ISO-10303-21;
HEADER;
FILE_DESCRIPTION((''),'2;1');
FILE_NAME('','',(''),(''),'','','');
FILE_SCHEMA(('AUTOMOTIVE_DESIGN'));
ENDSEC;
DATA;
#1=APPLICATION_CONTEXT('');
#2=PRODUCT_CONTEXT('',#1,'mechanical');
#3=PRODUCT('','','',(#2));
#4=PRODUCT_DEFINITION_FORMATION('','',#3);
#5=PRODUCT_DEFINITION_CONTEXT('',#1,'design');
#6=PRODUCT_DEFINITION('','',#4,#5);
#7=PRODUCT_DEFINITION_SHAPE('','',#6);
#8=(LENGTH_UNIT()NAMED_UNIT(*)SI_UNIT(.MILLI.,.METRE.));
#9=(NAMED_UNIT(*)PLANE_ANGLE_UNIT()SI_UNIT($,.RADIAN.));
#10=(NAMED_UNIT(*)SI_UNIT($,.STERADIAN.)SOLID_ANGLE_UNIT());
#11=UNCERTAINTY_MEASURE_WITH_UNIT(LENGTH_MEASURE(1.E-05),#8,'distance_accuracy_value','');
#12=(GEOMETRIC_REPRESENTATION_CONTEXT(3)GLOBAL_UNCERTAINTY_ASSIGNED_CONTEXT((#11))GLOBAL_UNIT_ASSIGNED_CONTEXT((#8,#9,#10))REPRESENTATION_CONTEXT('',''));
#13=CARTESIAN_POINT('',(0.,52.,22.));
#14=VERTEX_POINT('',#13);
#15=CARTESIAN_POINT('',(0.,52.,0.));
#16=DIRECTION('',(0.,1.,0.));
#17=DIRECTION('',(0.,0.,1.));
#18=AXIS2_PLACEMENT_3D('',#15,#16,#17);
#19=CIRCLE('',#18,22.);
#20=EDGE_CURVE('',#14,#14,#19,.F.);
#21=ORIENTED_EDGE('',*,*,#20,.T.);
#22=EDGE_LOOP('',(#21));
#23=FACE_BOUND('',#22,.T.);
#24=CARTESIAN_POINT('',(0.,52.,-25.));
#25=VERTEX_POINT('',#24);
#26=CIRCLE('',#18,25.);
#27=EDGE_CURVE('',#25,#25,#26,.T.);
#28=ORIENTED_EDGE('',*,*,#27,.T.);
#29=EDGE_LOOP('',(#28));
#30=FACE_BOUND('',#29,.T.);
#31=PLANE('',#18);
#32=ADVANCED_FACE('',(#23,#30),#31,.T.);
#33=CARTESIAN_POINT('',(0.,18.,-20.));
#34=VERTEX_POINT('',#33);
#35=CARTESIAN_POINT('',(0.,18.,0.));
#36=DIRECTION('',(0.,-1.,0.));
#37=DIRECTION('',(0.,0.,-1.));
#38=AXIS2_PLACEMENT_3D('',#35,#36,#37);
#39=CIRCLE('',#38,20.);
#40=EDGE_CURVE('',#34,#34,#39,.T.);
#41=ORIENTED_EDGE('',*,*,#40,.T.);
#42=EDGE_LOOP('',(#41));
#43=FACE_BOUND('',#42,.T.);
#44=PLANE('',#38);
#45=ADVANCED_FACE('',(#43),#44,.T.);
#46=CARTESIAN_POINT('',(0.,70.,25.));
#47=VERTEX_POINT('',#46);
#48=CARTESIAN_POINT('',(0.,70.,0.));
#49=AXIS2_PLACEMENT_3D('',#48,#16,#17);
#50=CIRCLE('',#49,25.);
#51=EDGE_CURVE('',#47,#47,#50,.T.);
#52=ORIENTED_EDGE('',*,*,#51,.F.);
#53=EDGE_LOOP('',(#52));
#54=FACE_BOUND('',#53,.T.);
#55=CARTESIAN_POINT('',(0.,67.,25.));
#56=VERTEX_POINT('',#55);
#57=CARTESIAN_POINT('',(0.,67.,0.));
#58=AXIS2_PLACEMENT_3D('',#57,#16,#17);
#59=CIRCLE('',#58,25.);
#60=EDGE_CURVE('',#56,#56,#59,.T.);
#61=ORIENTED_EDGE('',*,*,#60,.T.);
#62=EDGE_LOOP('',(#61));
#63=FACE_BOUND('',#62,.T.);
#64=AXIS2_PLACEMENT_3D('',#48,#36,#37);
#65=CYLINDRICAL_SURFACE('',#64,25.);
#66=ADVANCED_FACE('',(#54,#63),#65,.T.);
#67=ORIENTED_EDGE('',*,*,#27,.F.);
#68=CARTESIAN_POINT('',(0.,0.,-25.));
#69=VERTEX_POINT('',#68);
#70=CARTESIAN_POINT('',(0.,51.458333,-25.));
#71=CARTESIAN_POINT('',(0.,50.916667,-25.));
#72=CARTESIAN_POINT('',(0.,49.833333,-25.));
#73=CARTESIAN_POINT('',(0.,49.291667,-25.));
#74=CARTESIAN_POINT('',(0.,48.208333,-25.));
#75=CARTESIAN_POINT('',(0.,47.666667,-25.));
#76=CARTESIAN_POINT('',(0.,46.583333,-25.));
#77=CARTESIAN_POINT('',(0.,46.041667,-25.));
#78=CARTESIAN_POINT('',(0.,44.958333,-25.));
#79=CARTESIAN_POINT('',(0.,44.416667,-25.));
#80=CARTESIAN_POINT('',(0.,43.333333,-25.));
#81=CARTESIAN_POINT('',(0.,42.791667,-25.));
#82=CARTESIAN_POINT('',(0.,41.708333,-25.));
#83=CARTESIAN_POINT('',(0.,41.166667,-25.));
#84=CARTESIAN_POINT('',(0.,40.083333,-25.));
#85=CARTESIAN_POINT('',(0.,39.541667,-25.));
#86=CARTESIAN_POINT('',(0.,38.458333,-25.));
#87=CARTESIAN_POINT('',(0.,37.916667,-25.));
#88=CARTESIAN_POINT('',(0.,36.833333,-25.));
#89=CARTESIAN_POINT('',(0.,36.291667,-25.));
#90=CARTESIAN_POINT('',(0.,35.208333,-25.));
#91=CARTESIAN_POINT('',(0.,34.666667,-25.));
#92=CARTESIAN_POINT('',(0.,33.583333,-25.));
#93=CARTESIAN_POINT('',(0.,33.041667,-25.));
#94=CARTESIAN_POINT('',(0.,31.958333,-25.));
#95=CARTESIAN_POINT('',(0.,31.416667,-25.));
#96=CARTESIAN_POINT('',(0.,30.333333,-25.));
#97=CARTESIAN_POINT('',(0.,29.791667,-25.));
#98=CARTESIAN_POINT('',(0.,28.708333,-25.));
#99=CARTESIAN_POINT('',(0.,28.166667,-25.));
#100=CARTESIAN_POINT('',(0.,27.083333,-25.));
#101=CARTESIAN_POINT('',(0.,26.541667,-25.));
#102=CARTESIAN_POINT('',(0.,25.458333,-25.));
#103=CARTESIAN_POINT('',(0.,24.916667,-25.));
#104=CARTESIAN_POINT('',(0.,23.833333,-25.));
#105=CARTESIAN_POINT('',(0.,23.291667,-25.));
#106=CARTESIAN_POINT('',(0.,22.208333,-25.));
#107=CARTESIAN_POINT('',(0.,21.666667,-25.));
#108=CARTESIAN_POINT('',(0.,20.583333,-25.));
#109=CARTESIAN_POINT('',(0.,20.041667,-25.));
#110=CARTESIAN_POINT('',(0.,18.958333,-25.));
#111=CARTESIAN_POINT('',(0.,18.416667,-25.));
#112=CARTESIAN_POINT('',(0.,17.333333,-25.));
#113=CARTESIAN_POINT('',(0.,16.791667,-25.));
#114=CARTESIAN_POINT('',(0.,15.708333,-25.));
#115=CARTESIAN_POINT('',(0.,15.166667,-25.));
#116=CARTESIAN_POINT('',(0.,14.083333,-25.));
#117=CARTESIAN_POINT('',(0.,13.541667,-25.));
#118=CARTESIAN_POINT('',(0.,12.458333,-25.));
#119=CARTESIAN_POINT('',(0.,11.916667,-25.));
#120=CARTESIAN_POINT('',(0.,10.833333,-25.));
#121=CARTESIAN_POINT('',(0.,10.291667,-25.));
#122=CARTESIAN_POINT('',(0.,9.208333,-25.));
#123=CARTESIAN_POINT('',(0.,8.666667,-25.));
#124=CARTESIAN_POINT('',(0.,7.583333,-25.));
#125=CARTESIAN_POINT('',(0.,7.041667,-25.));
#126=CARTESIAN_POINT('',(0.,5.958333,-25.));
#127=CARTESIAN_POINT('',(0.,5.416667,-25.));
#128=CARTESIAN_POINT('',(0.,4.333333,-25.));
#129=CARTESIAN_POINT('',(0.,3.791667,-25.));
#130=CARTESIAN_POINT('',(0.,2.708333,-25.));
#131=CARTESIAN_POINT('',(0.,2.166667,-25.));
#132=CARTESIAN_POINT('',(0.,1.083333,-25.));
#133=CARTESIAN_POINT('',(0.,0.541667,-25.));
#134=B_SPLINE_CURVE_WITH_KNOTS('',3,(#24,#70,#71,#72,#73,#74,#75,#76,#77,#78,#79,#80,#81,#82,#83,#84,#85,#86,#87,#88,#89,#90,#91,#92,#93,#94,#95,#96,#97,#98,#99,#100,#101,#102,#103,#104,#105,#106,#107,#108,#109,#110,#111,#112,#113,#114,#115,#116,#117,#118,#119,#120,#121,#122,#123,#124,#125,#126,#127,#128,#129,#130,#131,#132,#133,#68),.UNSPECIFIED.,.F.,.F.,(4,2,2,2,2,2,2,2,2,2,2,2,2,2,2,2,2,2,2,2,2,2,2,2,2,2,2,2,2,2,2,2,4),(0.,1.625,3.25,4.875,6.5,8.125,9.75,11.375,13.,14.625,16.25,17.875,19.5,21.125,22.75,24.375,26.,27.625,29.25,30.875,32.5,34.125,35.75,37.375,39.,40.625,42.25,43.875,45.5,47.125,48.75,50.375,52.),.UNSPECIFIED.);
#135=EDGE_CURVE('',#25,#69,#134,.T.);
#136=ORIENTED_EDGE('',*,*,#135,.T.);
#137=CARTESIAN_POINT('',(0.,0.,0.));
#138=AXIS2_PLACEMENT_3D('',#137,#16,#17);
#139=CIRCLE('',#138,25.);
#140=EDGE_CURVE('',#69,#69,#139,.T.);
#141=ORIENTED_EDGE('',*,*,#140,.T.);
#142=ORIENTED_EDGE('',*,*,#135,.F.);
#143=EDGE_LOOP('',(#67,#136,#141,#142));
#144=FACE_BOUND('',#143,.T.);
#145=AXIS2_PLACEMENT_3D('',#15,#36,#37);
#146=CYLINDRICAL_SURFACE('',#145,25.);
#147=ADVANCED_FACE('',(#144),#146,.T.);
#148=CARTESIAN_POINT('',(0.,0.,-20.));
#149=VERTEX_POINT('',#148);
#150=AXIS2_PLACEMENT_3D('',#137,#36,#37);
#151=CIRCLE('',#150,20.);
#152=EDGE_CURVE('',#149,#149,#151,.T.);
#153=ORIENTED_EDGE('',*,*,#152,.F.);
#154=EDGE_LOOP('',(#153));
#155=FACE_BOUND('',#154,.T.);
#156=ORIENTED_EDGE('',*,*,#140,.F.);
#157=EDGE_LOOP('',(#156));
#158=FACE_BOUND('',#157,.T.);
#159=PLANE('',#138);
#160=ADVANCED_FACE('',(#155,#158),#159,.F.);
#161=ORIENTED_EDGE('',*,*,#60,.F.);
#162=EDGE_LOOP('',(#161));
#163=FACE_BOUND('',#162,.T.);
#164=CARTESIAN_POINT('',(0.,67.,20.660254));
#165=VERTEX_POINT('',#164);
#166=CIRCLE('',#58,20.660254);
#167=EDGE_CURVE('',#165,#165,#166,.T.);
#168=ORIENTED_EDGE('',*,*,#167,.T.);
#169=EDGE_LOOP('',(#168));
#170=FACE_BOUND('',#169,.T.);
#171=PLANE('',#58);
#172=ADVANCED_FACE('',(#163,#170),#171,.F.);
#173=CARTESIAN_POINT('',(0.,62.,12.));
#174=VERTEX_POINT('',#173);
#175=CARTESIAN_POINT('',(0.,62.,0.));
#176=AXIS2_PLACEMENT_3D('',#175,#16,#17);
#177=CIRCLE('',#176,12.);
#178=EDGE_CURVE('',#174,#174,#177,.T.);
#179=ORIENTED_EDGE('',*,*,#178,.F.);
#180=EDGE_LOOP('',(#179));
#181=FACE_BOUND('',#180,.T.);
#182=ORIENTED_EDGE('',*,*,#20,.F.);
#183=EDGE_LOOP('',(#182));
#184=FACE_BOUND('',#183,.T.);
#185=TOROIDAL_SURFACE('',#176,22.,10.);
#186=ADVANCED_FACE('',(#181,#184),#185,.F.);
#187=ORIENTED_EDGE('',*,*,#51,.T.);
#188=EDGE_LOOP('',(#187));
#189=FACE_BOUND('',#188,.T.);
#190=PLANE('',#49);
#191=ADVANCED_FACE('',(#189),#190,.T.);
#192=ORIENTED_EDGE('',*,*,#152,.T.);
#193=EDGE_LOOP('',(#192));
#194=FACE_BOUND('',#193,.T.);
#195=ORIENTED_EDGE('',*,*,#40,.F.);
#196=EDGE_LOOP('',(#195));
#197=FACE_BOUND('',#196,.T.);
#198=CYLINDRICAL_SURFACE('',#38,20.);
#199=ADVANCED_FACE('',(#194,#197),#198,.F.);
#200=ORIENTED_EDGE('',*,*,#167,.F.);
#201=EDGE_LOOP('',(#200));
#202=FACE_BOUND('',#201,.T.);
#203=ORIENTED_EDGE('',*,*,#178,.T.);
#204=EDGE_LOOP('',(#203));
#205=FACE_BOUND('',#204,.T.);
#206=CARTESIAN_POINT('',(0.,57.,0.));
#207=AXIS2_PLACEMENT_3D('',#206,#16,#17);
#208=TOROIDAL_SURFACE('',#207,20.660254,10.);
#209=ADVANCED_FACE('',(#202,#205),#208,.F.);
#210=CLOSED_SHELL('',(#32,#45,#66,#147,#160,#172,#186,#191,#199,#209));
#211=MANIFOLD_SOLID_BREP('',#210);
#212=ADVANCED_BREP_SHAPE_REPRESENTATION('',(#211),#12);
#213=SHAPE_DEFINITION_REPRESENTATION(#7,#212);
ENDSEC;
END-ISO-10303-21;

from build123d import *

# Parameters (mm, degrees)
SKETCH1_R           = 25
BOSS_EXTRUDE1_DEPTH = 52
SKETCH2_R           = 12
BOSS_EXTRUDE2_DEPTH = 15
SKETCH3_R           = 25
BOSS_EXTRUDE3_DEPTH = 3
FILLET1_R           = 10
FILLET2_R           = 10
SKETCH4_R           = 20
CUT_EXTRUDE1_DEPTH  = 18


with BuildPart() as part:
    # Sketch1 → Boss-Extrude1 (new body)
    with BuildSketch(Plane(origin=(0, 0, 0), x_dir=(1, 0, 0), z_dir=(0, 1, 0))):
        with Locations(Location((0, 0, 0), (0, 0, 90))):
            Circle(SKETCH1_R)
    extrude(amount=BOSS_EXTRUDE1_DEPTH)

    # Sketch2 → Boss-Extrude2 (add)
    with BuildSketch(Plane(origin=(0, 52, 0), x_dir=(1, 0, 0), z_dir=(0, 1, 0))):
        with Locations(Location((0, 0, 0), (0, 0, 270))):
            Circle(SKETCH2_R)
    extrude(amount=BOSS_EXTRUDE2_DEPTH)

    # Sketch3 → Boss-Extrude3 (add)
    with BuildSketch(Plane(origin=(0, 67, 0), x_dir=(1, 0, 0), z_dir=(0, 1, 0))):
        with Locations(Location((0, 0, 0), (0, 0, 90))):
            Circle(SKETCH3_R)
    extrude(amount=BOSS_EXTRUDE3_DEPTH)

    # Fillet1
    fillet1_edges = [part.edges().sort_by_distance(p)[0] for p in [
        (0, 52, -12),
    ]]
    fillet(fillet1_edges, radius=FILLET1_R)

    # Fillet2
    # the kernel refuses this fillet: 10 mm, written as the material it adds along each edge
    with BuildSketch(Plane(origin=(0, 67, 0), x_dir=(0, 0, 1), z_dir=(-1, 0, 0))) as fillet2_piece_1:
        with BuildLine():
            CenterArc((20.660254038, -10), FILLET2_R, 90, 60)
            Line((20.660254038, 0), (20.660254038, 0.2))
            Line((20.660254038, 0.2), (12, 0.2))
            Line((12, 0.2), (11.8, 0))
            ThreePointArc((11.8, 0), (11.8, -2.5), (11.826794919, -4.9))
            Line((11.826794919, -4.9), (12, -5))
        make_face()
    revolve(axis=Axis((0, 67, 0), (0, 1, 0)))

    # Sketch4 → Cut-Extrude1 (cut)
    with BuildSketch(Plane(origin=(0, 0, 0), x_dir=(-1, 0, 0), z_dir=(0, -1, 0))):
        with Locations(Location((0, 0, 0), (0, 0, 90))):
            Circle(SKETCH4_R)
    extrude(amount=-CUT_EXTRUDE1_DEPTH, mode=Mode.SUBTRACT)


solid = part.part
